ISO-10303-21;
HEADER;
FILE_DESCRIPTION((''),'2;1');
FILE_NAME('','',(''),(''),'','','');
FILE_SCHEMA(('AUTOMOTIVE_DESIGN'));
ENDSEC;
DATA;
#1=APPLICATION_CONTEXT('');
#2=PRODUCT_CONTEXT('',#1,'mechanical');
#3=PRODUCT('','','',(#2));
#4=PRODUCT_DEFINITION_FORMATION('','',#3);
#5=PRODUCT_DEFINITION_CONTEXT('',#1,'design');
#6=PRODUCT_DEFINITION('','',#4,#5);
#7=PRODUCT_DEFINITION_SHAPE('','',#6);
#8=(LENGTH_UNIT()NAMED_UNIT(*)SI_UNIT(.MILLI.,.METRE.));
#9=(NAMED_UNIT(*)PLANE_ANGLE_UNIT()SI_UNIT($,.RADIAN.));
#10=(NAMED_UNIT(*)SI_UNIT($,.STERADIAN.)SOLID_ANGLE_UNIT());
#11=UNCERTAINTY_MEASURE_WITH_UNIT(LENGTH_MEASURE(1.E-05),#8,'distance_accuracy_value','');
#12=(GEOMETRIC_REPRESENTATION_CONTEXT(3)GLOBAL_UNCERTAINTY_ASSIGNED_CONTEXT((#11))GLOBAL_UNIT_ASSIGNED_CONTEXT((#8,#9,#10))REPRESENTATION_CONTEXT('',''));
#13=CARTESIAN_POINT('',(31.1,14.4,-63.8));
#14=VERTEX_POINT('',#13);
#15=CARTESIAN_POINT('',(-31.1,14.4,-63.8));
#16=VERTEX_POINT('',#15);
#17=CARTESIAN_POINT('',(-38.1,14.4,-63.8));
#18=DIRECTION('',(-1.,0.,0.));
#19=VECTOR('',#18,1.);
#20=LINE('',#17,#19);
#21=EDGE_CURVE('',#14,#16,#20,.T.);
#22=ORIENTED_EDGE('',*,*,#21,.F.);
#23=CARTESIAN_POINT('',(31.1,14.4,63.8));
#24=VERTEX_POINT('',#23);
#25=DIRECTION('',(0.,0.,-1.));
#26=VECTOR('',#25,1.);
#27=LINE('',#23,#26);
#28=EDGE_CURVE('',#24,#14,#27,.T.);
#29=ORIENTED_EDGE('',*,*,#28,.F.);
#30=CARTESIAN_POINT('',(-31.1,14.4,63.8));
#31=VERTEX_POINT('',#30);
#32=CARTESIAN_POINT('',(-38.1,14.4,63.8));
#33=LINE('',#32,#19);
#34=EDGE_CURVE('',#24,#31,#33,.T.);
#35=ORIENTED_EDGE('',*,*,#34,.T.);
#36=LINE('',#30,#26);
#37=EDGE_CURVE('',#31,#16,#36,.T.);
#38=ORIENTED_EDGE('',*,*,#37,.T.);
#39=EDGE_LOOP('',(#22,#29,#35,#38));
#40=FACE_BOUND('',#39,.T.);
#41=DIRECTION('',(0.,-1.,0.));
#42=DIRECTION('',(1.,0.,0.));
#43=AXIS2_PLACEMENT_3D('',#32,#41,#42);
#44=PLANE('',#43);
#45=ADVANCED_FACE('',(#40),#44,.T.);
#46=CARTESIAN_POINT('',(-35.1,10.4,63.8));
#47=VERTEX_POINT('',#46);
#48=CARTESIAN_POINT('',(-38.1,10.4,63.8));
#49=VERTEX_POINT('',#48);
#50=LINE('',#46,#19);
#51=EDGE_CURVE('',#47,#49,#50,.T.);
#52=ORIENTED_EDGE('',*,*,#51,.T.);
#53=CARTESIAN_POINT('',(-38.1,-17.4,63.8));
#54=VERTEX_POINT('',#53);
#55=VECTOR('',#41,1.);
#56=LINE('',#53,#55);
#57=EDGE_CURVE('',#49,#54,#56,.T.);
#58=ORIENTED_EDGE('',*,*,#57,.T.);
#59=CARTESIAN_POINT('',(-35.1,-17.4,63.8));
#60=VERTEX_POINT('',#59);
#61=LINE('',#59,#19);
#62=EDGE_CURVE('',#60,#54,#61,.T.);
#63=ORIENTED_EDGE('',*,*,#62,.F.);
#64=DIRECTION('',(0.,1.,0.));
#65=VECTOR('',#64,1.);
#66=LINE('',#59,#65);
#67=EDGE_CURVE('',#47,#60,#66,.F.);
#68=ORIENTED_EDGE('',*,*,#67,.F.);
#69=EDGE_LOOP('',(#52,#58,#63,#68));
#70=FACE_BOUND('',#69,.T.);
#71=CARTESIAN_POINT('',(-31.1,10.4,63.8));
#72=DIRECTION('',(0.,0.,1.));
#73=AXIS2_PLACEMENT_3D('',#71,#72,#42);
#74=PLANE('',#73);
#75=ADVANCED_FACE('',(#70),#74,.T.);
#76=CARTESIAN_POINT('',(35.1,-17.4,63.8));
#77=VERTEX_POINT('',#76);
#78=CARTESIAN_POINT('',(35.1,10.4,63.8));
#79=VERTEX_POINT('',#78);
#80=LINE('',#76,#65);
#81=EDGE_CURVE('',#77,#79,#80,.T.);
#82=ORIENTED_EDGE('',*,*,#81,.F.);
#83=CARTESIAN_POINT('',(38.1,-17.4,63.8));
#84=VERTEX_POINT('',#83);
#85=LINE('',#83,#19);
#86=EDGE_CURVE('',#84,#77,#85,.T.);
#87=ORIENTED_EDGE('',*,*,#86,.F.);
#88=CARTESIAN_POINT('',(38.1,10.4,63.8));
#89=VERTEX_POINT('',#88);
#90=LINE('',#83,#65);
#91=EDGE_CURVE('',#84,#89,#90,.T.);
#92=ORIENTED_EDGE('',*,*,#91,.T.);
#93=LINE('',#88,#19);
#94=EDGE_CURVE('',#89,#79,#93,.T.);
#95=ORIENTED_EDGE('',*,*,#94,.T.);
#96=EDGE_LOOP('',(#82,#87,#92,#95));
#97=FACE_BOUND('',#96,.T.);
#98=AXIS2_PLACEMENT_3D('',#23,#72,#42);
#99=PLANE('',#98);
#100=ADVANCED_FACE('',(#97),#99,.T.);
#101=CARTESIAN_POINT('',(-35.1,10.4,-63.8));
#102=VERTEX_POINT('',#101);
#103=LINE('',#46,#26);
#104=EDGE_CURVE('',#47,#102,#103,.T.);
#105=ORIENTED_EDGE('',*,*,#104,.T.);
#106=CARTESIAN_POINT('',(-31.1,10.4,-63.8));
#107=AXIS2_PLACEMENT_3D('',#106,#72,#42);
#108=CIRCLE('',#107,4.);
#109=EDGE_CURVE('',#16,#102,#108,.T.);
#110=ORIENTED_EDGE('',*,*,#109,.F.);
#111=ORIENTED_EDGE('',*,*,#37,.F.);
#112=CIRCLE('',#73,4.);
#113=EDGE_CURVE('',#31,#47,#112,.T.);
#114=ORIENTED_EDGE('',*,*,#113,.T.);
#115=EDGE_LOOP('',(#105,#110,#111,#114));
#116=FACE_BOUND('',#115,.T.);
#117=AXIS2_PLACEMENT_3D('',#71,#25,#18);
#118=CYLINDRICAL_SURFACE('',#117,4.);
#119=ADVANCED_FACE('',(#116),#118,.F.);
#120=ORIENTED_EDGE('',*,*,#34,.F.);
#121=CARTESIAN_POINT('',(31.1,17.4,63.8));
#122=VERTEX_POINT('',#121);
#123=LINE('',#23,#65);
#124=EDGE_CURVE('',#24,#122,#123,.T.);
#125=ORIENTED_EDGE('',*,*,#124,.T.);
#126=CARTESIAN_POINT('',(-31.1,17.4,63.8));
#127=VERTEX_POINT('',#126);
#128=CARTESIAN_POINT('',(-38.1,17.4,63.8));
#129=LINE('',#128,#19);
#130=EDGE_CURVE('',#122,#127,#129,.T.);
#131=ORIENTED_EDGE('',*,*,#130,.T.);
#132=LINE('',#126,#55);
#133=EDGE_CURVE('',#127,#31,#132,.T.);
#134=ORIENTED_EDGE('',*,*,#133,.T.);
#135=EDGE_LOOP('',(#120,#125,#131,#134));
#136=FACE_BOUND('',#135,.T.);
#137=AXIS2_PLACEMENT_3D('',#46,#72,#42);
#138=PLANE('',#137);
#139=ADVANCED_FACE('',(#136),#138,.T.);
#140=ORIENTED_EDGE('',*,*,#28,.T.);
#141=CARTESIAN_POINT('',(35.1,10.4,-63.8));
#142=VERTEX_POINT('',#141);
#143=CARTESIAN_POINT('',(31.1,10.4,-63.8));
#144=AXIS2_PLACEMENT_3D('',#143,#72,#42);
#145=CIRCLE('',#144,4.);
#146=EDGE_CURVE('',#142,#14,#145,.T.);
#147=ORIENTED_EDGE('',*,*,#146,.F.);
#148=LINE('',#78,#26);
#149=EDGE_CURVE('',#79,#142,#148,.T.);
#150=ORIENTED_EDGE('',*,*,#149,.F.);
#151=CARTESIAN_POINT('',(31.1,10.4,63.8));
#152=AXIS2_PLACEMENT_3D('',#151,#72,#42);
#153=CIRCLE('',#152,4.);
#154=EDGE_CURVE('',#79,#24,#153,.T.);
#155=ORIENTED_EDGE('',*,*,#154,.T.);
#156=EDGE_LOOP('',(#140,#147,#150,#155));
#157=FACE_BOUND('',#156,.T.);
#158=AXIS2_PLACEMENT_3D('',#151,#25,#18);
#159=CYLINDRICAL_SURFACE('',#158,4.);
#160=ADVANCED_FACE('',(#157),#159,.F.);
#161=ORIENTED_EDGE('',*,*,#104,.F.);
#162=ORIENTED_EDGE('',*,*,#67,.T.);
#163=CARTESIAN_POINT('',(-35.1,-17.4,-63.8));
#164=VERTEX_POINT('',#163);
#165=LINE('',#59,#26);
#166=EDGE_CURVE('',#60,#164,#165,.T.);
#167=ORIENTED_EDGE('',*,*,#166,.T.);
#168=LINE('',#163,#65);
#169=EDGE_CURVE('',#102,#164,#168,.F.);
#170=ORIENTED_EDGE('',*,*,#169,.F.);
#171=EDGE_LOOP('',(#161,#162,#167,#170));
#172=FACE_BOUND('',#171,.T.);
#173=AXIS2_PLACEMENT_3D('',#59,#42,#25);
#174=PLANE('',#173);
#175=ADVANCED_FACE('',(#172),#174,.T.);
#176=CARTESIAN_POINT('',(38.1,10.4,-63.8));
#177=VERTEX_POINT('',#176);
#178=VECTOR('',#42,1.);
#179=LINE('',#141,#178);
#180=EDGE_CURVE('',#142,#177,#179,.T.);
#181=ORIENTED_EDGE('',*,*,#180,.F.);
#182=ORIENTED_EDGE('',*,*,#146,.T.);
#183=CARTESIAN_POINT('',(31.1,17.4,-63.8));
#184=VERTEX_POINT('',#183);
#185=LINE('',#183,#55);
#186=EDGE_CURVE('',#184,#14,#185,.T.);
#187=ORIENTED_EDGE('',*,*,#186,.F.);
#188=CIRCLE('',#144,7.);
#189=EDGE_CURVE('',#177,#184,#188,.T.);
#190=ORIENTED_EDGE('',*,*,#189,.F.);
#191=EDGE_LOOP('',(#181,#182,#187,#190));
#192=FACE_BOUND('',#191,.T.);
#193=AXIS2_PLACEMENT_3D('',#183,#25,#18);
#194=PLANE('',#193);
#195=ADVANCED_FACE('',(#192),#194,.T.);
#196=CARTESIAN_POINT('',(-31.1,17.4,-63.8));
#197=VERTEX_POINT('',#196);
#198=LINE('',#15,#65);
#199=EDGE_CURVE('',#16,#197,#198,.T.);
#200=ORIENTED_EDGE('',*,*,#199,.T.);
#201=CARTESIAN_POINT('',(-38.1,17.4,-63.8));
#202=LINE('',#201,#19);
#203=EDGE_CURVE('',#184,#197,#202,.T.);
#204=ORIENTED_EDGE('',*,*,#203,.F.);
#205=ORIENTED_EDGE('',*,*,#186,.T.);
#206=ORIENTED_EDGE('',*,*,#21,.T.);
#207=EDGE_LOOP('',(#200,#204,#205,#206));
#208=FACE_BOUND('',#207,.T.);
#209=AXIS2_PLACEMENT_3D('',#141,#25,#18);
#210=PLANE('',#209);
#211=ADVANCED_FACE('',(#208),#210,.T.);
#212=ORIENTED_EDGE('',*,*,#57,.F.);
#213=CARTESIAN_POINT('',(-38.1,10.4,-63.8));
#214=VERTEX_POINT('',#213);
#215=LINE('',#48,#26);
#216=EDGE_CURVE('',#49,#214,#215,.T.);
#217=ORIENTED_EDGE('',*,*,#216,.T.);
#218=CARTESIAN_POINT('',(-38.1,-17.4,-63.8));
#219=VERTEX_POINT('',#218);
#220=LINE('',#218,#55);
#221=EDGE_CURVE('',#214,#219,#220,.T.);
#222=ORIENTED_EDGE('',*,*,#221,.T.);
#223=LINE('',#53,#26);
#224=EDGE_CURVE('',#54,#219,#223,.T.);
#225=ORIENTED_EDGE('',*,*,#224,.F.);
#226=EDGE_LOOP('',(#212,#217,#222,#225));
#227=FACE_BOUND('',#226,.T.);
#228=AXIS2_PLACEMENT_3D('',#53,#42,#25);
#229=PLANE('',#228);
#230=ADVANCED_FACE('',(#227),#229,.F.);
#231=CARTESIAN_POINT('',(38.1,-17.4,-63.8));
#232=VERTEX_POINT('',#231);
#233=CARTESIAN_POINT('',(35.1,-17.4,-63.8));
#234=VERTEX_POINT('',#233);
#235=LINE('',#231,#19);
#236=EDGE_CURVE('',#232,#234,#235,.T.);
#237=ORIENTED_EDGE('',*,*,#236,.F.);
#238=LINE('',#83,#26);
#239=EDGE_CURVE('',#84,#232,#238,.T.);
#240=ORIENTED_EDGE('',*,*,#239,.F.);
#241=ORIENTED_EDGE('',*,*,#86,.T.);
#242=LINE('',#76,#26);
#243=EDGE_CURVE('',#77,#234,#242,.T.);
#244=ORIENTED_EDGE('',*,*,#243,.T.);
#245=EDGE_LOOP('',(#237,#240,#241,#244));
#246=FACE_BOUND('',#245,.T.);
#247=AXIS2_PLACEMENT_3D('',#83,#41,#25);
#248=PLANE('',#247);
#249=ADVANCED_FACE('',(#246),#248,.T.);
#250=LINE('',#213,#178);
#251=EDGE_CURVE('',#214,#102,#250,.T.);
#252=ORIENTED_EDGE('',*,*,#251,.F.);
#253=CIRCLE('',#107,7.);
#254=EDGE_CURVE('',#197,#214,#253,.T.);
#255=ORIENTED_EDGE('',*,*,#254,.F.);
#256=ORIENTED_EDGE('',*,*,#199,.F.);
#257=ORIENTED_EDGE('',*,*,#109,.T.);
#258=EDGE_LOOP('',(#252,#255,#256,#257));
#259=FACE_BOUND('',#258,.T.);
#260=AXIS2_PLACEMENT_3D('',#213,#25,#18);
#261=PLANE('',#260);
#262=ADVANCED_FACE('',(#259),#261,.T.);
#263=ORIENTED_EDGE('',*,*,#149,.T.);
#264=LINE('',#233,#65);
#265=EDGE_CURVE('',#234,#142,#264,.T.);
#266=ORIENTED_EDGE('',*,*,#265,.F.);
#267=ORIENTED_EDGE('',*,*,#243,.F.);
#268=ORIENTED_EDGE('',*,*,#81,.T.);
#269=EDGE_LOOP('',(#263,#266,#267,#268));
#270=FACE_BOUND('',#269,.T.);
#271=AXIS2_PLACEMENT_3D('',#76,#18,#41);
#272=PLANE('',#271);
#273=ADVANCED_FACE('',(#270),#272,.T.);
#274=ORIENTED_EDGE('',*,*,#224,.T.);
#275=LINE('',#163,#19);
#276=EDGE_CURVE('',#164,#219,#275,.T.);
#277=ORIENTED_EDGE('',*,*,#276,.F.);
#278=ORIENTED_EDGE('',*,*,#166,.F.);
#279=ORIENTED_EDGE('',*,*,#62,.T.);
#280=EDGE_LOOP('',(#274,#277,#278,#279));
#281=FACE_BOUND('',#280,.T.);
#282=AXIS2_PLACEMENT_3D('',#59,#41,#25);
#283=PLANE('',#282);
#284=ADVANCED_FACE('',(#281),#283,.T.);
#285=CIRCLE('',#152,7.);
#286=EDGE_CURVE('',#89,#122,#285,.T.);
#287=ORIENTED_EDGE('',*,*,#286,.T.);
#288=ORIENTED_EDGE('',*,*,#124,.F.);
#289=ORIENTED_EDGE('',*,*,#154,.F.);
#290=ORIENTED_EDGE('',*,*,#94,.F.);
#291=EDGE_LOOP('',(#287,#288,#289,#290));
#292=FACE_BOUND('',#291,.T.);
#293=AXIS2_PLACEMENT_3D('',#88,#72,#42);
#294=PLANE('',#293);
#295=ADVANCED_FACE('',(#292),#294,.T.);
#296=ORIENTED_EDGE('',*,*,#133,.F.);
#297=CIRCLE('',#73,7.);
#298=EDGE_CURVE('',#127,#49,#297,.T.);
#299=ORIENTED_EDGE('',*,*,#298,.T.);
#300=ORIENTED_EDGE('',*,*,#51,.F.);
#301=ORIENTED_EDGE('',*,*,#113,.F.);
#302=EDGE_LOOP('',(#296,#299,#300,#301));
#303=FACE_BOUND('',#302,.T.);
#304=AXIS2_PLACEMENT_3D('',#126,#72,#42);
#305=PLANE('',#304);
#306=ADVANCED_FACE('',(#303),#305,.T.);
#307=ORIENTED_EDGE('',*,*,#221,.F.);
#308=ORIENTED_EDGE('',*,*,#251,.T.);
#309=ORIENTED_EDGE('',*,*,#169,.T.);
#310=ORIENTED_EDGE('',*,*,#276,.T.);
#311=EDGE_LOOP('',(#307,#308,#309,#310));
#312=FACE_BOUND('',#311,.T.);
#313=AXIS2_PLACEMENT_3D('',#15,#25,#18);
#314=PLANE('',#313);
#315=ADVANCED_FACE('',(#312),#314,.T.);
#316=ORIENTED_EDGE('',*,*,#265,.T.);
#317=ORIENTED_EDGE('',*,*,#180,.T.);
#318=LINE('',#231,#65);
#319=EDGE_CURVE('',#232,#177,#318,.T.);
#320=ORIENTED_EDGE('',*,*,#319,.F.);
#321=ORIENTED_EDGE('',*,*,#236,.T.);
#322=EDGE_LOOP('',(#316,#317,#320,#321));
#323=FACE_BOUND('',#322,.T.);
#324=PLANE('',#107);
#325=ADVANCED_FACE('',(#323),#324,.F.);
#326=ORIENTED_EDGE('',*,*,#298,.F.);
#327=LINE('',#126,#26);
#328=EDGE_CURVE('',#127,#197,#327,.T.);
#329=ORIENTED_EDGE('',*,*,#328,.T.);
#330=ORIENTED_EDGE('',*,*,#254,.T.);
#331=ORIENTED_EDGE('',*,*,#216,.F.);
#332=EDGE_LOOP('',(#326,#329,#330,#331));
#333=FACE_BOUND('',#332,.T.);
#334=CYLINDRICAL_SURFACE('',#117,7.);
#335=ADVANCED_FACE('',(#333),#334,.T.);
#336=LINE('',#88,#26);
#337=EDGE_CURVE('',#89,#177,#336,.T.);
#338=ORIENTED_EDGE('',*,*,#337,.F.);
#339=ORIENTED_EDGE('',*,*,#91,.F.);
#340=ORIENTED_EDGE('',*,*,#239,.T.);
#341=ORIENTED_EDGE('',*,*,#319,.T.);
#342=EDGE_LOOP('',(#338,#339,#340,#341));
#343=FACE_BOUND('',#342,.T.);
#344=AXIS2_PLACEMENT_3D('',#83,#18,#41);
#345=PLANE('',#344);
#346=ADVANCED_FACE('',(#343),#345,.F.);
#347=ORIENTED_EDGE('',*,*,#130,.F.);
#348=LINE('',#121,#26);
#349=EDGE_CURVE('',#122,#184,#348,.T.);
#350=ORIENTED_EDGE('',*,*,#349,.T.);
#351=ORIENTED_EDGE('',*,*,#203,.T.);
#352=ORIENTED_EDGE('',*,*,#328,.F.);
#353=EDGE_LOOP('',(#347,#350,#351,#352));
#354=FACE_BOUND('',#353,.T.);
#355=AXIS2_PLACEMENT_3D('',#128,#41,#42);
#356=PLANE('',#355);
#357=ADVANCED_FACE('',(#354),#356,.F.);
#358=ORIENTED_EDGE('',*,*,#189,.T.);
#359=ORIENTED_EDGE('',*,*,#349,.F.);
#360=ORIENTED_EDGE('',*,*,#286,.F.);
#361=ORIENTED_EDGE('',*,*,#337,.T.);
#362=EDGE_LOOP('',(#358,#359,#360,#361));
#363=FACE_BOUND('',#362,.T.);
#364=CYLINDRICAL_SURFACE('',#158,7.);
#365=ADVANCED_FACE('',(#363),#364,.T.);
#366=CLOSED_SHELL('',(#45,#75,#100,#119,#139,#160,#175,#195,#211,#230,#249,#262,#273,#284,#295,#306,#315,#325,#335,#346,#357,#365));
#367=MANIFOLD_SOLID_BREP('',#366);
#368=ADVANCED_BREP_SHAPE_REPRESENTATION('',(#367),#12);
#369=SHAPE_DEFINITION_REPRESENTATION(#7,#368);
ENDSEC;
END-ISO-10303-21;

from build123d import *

# Parameters (mm, degrees)
BASE_FLANGE1_DEPTH = 63.8


# Sheet-metal steps are written as plain solids
with BuildPart() as part:
    # Sketch2 → Base-Flange1 (new, symmetric)
    with BuildSketch(Plane.XY):
        with BuildLine():
            Line((-38.1, -17.4), (-38.1, 10.4))
            ThreePointArc((-38.1, 10.4), (-36.049747468, 15.349747468), (-31.1, 17.4))
            Line((-31.1, 17.4), (31.1, 17.4))
            ThreePointArc((31.1, 17.4), (36.049747468, 15.349747468), (38.1, 10.4))
            Line((38.1, 10.4), (38.1, -17.4))
            Line((38.1, -17.4), (35.1, -17.4))
            Line((35.1, -17.4), (35.1, 10.4))
            ThreePointArc((35.1, 10.4), (33.928427125, 13.228427125), (31.1, 14.4))
            Line((31.1, 14.4), (-31.1, 14.4))
            ThreePointArc((-31.1, 14.4), (-33.928427125, 13.228427125), (-35.1, 10.4))
            Line((-35.1, 10.4), (-35.1, -17.4))
            Line((-35.1, -17.4), (-38.1, -17.4))
        make_face()
    extrude(amount=BASE_FLANGE1_DEPTH, both=True)


solid = part.part
